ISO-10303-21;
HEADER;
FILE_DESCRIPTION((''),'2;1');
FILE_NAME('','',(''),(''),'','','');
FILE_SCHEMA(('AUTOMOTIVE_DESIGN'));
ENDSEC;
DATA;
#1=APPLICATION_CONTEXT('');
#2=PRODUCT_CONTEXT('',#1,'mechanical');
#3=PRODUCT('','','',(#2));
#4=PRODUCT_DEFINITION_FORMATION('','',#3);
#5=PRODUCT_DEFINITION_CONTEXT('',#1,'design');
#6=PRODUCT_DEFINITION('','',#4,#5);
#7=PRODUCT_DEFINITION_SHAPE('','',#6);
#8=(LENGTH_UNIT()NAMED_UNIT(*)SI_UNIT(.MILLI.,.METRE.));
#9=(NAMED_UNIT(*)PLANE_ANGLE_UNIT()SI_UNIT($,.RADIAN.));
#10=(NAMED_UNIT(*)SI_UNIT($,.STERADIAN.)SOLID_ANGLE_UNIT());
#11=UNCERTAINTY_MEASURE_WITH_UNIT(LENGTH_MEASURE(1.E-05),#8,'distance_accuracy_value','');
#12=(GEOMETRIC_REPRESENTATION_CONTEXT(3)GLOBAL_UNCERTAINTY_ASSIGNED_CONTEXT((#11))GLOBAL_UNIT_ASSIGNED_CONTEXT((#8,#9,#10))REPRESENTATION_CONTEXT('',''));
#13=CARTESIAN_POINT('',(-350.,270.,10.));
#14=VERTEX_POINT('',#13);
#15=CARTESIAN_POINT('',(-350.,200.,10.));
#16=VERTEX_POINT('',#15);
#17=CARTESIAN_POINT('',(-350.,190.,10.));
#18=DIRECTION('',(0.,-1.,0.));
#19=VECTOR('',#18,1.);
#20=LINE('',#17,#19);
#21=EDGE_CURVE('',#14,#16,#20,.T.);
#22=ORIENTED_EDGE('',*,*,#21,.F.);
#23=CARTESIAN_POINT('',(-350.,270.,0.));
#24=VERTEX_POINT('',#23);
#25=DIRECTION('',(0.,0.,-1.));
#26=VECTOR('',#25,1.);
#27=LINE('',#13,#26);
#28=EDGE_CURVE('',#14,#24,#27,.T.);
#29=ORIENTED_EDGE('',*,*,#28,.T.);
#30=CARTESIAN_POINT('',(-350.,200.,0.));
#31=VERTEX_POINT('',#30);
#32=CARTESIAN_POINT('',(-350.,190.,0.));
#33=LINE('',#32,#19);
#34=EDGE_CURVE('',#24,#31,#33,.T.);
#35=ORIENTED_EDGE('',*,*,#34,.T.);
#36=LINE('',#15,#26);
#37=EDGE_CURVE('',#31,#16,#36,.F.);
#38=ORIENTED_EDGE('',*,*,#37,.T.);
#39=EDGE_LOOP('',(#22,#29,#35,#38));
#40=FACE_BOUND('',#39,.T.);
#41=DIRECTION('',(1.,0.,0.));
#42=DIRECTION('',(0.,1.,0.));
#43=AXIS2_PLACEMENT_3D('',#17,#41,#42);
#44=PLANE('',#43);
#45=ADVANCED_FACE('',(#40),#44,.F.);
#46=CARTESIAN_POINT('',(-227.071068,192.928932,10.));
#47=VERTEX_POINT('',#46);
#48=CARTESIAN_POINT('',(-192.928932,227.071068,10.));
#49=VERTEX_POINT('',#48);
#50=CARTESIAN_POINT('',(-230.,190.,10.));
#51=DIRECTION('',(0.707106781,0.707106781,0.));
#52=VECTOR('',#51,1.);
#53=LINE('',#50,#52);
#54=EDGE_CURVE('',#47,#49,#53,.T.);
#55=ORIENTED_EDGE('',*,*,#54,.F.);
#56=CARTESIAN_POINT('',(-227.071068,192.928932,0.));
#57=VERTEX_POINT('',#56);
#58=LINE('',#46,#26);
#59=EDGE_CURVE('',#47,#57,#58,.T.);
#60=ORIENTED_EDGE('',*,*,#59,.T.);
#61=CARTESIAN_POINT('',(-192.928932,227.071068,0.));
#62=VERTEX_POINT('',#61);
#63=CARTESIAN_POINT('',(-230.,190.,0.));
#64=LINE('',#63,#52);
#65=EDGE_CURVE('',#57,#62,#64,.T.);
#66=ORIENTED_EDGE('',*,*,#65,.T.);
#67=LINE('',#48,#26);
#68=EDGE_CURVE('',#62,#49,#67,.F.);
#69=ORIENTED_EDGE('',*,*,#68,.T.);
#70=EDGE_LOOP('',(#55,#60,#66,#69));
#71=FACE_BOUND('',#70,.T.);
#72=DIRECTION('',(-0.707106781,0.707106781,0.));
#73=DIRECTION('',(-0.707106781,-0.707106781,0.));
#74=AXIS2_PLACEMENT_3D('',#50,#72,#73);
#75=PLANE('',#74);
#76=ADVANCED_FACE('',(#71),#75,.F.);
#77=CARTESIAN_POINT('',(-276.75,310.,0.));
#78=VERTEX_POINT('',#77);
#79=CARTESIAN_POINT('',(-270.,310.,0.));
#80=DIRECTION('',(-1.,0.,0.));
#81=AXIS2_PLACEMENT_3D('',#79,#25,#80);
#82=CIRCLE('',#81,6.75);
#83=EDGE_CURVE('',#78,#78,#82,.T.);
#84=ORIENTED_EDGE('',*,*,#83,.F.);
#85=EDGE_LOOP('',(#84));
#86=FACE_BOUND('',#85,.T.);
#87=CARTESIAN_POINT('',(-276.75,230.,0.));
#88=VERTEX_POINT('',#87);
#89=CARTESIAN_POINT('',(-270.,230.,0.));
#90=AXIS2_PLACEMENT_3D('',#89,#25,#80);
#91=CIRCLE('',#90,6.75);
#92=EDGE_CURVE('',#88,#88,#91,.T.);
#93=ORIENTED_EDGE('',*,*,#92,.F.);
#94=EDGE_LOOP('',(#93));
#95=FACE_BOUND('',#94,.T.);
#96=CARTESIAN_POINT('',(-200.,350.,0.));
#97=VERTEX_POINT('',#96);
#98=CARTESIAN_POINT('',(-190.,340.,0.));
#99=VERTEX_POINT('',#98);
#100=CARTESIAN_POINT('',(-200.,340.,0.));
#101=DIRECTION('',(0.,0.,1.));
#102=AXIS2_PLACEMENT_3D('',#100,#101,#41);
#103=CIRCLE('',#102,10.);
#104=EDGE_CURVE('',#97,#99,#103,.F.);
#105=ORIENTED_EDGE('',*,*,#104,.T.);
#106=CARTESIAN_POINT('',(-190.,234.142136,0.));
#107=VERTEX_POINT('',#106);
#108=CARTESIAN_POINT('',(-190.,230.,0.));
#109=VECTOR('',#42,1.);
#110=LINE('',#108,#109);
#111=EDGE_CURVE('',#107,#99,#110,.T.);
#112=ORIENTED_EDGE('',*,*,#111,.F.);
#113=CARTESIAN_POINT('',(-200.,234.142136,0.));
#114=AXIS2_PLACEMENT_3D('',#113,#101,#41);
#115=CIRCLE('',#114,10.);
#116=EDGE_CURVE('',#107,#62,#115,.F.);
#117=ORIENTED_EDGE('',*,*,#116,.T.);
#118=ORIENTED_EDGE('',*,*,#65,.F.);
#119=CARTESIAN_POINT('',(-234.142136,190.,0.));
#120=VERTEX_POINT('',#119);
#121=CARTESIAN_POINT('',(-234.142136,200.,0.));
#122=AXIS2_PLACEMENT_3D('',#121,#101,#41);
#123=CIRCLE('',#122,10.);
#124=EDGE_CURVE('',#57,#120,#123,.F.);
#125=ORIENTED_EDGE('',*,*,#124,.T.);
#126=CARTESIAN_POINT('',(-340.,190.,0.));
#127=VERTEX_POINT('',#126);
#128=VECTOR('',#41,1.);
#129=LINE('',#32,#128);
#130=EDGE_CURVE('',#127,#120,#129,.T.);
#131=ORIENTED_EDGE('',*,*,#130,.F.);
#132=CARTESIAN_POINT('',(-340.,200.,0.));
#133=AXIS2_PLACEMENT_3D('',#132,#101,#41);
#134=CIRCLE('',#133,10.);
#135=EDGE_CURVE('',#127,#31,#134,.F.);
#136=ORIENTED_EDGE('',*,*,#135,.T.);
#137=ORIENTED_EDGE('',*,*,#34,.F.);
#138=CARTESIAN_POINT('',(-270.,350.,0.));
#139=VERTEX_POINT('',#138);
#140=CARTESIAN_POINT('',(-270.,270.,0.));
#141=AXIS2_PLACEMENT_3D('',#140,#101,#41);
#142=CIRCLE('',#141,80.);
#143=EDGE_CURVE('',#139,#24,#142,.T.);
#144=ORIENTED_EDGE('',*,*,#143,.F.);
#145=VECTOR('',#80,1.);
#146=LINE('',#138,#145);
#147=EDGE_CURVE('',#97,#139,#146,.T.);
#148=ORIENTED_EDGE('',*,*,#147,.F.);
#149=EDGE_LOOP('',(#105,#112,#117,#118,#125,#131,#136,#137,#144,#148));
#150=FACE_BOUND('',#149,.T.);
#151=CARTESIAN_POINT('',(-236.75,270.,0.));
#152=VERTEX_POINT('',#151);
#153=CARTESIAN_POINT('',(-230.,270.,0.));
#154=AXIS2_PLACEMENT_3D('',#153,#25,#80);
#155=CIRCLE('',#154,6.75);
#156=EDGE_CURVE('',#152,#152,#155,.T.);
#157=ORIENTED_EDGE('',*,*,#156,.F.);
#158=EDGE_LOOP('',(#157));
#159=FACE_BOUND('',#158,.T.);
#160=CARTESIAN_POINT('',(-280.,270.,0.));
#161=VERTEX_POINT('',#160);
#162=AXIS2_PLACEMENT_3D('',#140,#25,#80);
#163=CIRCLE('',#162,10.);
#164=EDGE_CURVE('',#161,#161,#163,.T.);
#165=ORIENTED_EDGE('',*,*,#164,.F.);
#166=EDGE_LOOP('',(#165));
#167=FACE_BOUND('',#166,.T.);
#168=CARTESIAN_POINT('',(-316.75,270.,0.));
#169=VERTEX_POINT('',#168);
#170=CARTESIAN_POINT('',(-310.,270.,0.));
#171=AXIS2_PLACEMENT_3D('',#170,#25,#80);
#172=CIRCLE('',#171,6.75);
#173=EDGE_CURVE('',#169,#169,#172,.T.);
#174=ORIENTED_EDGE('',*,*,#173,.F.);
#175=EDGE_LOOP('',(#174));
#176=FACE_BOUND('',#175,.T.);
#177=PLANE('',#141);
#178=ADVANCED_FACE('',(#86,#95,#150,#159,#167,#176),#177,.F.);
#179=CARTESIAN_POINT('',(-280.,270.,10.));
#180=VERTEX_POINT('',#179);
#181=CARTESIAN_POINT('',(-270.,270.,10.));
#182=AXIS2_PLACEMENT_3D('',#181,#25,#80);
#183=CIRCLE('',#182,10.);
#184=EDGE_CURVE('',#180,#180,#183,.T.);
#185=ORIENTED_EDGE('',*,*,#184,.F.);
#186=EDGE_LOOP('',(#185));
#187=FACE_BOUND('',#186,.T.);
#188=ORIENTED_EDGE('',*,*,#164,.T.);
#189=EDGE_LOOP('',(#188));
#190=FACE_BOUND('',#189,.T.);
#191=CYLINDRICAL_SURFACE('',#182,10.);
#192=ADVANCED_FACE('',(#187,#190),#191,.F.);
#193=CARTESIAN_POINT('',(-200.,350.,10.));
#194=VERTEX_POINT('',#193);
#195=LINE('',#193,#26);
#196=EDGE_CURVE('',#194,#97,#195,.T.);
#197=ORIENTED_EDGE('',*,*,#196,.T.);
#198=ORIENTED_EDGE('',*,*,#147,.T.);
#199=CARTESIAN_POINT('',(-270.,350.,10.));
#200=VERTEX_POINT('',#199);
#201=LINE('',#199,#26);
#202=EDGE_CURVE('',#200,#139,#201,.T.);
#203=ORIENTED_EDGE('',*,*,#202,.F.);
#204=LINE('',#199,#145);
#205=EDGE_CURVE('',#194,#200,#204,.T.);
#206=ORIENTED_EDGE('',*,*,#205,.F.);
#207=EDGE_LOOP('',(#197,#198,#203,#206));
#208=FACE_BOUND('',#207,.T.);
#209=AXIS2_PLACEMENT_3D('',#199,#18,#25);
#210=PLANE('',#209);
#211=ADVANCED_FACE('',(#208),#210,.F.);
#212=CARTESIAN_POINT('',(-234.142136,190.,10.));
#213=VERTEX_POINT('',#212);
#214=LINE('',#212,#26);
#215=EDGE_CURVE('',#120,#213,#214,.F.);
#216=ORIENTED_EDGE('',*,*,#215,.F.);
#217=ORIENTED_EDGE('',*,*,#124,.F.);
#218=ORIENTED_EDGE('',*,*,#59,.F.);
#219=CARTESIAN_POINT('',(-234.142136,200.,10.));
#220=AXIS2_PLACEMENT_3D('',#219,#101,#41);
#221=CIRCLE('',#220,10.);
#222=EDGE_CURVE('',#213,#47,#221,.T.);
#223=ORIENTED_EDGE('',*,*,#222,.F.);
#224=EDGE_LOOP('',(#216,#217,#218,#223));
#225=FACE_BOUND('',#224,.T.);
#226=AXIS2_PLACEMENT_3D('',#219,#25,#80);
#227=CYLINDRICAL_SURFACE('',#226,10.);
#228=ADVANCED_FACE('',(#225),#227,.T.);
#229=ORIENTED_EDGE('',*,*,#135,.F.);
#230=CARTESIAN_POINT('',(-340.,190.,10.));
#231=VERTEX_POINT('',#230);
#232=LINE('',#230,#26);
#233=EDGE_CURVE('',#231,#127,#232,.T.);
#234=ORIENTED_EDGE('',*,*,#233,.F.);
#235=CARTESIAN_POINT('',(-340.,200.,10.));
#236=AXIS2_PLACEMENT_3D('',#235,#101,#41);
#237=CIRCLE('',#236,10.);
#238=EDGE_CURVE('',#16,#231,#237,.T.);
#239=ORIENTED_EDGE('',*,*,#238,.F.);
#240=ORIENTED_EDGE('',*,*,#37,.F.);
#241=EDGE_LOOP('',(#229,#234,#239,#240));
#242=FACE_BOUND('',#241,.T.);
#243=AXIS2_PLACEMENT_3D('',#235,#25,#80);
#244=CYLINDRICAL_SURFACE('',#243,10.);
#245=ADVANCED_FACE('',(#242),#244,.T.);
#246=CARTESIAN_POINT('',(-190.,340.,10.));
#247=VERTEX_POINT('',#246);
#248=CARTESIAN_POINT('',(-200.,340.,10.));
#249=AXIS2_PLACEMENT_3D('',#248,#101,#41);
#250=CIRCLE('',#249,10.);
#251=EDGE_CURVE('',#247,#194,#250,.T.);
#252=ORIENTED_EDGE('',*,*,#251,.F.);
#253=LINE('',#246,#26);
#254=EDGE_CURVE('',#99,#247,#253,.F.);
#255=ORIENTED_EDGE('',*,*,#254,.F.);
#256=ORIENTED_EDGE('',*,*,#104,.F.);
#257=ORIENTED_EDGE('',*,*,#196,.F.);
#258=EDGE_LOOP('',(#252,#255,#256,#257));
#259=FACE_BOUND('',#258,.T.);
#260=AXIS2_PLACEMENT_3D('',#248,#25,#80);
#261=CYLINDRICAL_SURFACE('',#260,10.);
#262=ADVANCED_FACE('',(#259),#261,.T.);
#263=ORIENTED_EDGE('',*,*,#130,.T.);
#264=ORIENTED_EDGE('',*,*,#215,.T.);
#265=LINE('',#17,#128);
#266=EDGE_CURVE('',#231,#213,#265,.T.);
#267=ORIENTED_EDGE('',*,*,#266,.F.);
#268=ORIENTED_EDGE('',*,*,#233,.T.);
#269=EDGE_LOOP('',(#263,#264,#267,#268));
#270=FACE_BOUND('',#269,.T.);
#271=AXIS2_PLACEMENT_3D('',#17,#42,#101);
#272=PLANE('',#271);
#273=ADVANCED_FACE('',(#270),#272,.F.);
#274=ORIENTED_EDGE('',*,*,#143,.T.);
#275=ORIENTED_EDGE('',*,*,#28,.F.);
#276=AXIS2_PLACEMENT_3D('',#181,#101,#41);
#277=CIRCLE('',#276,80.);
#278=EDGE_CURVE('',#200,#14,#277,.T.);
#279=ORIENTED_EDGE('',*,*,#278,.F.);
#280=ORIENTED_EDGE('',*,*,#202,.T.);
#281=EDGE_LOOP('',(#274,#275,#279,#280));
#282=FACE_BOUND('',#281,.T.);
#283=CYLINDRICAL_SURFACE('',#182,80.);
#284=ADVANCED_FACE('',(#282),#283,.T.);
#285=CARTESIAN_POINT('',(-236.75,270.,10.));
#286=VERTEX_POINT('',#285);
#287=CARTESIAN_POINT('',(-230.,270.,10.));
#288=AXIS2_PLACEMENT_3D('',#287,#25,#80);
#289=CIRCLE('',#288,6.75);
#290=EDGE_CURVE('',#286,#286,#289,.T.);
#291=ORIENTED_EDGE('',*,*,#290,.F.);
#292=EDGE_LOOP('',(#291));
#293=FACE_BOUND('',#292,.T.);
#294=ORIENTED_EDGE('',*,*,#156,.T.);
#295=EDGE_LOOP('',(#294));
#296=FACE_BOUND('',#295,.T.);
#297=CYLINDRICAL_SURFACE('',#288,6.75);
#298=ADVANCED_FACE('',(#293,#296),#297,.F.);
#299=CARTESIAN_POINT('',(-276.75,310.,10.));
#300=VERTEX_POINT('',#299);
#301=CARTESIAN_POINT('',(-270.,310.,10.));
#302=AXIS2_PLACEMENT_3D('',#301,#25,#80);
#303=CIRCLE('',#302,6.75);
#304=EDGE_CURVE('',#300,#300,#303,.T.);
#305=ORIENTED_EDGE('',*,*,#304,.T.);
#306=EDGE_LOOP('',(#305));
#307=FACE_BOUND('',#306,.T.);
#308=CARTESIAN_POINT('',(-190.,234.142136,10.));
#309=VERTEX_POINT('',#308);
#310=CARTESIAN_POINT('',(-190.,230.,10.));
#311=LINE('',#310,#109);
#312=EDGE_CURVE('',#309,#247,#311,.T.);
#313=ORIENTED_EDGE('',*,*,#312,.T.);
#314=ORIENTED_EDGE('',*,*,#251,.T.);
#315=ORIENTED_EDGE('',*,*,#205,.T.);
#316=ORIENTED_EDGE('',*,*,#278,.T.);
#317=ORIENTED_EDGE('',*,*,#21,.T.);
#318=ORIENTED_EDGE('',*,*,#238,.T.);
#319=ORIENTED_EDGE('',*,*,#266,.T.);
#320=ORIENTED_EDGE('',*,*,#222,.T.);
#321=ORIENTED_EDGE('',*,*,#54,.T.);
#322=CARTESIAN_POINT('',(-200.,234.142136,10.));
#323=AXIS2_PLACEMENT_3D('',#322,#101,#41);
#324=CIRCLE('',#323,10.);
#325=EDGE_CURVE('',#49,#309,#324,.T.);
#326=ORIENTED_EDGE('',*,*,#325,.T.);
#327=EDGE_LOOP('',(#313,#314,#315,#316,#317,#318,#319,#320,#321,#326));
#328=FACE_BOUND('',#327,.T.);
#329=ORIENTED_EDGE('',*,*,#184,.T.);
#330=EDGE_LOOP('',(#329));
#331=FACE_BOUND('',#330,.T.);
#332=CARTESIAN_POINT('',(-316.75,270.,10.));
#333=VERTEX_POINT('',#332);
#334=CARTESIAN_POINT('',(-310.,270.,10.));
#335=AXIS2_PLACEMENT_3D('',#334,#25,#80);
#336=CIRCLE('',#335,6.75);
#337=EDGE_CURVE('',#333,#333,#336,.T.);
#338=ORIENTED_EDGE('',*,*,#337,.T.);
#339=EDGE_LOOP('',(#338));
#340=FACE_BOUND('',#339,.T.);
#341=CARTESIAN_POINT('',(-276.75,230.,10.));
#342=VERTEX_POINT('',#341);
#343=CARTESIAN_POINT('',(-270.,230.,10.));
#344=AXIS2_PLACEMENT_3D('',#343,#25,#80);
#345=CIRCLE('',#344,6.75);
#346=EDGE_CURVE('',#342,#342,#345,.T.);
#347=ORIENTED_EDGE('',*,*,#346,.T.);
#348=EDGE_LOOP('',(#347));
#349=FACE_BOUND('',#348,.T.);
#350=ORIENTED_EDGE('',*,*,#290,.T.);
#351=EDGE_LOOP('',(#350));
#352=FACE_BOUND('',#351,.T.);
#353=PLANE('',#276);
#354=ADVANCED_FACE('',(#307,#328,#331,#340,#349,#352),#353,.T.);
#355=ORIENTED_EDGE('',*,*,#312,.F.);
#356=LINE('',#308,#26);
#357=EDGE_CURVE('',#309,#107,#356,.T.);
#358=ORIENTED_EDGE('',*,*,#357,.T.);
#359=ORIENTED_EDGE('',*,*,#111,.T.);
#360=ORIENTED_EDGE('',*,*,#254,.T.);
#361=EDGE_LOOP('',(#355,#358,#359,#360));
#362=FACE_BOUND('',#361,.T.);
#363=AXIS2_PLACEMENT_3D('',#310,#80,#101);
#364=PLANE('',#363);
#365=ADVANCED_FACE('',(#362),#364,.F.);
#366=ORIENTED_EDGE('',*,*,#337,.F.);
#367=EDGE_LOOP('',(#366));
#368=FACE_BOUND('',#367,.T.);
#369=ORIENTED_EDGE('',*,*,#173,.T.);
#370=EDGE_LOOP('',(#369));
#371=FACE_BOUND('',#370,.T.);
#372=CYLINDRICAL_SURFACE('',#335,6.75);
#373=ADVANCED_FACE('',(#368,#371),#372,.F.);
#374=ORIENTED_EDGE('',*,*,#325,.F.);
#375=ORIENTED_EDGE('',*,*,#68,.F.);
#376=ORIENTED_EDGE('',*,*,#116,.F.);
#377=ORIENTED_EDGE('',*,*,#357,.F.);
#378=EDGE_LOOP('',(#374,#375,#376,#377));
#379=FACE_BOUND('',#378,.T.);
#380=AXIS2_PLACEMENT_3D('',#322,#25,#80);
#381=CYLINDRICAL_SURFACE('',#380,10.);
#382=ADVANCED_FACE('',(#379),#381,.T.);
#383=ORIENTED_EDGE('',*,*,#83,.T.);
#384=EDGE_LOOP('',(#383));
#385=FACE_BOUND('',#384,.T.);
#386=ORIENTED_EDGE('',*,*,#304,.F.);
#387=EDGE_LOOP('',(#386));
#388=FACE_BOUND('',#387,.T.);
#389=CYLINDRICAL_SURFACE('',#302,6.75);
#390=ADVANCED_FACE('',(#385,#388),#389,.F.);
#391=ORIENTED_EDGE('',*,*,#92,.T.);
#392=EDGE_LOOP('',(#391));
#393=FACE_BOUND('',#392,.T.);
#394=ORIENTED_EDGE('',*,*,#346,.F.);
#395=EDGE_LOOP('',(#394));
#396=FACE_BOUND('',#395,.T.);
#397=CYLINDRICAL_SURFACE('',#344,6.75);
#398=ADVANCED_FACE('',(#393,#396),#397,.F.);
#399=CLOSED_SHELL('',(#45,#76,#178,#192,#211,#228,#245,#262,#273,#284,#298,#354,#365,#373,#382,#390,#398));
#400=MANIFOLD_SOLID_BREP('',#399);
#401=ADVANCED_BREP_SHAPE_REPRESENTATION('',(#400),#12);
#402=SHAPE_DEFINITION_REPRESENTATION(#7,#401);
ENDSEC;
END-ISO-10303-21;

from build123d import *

# Parameters (mm, degrees)
BASE_FLANGE1_DEPTH = 10
SKETCH6_R          = 6.75
SKETCH6_R_2        = 10
CUT_EXTRUDE1_DEPTH = 496.075751779
FILLET1_R          = 10


# Sheet-metal steps are written as plain solids
with BuildPart() as part:
    # Sketch1 → Base-Flange1 (new body)
    with BuildSketch(Plane.XY):
        with BuildLine():
            Line((-350, 190), (-350, 270))
            ThreePointArc((-350, 270), (-326.568542495, 326.568542495), (-270, 350))
            Line((-270, 350), (-190, 350))
            Line((-190, 350), (-190, 230))
            Line((-190, 230), (-230, 190))
            Line((-230, 190), (-350, 190))
        make_face()
    extrude(amount=BASE_FLANGE1_DEPTH)

    # Sketch6 → Cut-Extrude1 (cut, through all)
    with BuildSketch(Plane(origin=(0, 0, 0), x_dir=(-1, 0, 0), z_dir=(0, 0, -1))):
        with Locations((270, 310)):
            Circle(SKETCH6_R)
        with Locations((310, 270)):
            Circle(SKETCH6_R)
        with Locations((230, 270)):
            Circle(SKETCH6_R)
        with Locations((270, 230)):
            Circle(SKETCH6_R)
        with Locations((270, 270)):
            Circle(SKETCH6_R_2)
    extrude(amount=-CUT_EXTRUDE1_DEPTH, mode=Mode.SUBTRACT)

    # Fillet1
    fillet1_edges = [part.edges().sort_by_distance(p)[0] for p in [
        (-190, 350, 5),
        (-190, 230, 5),
        (-230, 190, 5),
        (-350, 190, 5),
    ]]
    fillet(fillet1_edges, radius=FILLET1_R)


solid = part.part
